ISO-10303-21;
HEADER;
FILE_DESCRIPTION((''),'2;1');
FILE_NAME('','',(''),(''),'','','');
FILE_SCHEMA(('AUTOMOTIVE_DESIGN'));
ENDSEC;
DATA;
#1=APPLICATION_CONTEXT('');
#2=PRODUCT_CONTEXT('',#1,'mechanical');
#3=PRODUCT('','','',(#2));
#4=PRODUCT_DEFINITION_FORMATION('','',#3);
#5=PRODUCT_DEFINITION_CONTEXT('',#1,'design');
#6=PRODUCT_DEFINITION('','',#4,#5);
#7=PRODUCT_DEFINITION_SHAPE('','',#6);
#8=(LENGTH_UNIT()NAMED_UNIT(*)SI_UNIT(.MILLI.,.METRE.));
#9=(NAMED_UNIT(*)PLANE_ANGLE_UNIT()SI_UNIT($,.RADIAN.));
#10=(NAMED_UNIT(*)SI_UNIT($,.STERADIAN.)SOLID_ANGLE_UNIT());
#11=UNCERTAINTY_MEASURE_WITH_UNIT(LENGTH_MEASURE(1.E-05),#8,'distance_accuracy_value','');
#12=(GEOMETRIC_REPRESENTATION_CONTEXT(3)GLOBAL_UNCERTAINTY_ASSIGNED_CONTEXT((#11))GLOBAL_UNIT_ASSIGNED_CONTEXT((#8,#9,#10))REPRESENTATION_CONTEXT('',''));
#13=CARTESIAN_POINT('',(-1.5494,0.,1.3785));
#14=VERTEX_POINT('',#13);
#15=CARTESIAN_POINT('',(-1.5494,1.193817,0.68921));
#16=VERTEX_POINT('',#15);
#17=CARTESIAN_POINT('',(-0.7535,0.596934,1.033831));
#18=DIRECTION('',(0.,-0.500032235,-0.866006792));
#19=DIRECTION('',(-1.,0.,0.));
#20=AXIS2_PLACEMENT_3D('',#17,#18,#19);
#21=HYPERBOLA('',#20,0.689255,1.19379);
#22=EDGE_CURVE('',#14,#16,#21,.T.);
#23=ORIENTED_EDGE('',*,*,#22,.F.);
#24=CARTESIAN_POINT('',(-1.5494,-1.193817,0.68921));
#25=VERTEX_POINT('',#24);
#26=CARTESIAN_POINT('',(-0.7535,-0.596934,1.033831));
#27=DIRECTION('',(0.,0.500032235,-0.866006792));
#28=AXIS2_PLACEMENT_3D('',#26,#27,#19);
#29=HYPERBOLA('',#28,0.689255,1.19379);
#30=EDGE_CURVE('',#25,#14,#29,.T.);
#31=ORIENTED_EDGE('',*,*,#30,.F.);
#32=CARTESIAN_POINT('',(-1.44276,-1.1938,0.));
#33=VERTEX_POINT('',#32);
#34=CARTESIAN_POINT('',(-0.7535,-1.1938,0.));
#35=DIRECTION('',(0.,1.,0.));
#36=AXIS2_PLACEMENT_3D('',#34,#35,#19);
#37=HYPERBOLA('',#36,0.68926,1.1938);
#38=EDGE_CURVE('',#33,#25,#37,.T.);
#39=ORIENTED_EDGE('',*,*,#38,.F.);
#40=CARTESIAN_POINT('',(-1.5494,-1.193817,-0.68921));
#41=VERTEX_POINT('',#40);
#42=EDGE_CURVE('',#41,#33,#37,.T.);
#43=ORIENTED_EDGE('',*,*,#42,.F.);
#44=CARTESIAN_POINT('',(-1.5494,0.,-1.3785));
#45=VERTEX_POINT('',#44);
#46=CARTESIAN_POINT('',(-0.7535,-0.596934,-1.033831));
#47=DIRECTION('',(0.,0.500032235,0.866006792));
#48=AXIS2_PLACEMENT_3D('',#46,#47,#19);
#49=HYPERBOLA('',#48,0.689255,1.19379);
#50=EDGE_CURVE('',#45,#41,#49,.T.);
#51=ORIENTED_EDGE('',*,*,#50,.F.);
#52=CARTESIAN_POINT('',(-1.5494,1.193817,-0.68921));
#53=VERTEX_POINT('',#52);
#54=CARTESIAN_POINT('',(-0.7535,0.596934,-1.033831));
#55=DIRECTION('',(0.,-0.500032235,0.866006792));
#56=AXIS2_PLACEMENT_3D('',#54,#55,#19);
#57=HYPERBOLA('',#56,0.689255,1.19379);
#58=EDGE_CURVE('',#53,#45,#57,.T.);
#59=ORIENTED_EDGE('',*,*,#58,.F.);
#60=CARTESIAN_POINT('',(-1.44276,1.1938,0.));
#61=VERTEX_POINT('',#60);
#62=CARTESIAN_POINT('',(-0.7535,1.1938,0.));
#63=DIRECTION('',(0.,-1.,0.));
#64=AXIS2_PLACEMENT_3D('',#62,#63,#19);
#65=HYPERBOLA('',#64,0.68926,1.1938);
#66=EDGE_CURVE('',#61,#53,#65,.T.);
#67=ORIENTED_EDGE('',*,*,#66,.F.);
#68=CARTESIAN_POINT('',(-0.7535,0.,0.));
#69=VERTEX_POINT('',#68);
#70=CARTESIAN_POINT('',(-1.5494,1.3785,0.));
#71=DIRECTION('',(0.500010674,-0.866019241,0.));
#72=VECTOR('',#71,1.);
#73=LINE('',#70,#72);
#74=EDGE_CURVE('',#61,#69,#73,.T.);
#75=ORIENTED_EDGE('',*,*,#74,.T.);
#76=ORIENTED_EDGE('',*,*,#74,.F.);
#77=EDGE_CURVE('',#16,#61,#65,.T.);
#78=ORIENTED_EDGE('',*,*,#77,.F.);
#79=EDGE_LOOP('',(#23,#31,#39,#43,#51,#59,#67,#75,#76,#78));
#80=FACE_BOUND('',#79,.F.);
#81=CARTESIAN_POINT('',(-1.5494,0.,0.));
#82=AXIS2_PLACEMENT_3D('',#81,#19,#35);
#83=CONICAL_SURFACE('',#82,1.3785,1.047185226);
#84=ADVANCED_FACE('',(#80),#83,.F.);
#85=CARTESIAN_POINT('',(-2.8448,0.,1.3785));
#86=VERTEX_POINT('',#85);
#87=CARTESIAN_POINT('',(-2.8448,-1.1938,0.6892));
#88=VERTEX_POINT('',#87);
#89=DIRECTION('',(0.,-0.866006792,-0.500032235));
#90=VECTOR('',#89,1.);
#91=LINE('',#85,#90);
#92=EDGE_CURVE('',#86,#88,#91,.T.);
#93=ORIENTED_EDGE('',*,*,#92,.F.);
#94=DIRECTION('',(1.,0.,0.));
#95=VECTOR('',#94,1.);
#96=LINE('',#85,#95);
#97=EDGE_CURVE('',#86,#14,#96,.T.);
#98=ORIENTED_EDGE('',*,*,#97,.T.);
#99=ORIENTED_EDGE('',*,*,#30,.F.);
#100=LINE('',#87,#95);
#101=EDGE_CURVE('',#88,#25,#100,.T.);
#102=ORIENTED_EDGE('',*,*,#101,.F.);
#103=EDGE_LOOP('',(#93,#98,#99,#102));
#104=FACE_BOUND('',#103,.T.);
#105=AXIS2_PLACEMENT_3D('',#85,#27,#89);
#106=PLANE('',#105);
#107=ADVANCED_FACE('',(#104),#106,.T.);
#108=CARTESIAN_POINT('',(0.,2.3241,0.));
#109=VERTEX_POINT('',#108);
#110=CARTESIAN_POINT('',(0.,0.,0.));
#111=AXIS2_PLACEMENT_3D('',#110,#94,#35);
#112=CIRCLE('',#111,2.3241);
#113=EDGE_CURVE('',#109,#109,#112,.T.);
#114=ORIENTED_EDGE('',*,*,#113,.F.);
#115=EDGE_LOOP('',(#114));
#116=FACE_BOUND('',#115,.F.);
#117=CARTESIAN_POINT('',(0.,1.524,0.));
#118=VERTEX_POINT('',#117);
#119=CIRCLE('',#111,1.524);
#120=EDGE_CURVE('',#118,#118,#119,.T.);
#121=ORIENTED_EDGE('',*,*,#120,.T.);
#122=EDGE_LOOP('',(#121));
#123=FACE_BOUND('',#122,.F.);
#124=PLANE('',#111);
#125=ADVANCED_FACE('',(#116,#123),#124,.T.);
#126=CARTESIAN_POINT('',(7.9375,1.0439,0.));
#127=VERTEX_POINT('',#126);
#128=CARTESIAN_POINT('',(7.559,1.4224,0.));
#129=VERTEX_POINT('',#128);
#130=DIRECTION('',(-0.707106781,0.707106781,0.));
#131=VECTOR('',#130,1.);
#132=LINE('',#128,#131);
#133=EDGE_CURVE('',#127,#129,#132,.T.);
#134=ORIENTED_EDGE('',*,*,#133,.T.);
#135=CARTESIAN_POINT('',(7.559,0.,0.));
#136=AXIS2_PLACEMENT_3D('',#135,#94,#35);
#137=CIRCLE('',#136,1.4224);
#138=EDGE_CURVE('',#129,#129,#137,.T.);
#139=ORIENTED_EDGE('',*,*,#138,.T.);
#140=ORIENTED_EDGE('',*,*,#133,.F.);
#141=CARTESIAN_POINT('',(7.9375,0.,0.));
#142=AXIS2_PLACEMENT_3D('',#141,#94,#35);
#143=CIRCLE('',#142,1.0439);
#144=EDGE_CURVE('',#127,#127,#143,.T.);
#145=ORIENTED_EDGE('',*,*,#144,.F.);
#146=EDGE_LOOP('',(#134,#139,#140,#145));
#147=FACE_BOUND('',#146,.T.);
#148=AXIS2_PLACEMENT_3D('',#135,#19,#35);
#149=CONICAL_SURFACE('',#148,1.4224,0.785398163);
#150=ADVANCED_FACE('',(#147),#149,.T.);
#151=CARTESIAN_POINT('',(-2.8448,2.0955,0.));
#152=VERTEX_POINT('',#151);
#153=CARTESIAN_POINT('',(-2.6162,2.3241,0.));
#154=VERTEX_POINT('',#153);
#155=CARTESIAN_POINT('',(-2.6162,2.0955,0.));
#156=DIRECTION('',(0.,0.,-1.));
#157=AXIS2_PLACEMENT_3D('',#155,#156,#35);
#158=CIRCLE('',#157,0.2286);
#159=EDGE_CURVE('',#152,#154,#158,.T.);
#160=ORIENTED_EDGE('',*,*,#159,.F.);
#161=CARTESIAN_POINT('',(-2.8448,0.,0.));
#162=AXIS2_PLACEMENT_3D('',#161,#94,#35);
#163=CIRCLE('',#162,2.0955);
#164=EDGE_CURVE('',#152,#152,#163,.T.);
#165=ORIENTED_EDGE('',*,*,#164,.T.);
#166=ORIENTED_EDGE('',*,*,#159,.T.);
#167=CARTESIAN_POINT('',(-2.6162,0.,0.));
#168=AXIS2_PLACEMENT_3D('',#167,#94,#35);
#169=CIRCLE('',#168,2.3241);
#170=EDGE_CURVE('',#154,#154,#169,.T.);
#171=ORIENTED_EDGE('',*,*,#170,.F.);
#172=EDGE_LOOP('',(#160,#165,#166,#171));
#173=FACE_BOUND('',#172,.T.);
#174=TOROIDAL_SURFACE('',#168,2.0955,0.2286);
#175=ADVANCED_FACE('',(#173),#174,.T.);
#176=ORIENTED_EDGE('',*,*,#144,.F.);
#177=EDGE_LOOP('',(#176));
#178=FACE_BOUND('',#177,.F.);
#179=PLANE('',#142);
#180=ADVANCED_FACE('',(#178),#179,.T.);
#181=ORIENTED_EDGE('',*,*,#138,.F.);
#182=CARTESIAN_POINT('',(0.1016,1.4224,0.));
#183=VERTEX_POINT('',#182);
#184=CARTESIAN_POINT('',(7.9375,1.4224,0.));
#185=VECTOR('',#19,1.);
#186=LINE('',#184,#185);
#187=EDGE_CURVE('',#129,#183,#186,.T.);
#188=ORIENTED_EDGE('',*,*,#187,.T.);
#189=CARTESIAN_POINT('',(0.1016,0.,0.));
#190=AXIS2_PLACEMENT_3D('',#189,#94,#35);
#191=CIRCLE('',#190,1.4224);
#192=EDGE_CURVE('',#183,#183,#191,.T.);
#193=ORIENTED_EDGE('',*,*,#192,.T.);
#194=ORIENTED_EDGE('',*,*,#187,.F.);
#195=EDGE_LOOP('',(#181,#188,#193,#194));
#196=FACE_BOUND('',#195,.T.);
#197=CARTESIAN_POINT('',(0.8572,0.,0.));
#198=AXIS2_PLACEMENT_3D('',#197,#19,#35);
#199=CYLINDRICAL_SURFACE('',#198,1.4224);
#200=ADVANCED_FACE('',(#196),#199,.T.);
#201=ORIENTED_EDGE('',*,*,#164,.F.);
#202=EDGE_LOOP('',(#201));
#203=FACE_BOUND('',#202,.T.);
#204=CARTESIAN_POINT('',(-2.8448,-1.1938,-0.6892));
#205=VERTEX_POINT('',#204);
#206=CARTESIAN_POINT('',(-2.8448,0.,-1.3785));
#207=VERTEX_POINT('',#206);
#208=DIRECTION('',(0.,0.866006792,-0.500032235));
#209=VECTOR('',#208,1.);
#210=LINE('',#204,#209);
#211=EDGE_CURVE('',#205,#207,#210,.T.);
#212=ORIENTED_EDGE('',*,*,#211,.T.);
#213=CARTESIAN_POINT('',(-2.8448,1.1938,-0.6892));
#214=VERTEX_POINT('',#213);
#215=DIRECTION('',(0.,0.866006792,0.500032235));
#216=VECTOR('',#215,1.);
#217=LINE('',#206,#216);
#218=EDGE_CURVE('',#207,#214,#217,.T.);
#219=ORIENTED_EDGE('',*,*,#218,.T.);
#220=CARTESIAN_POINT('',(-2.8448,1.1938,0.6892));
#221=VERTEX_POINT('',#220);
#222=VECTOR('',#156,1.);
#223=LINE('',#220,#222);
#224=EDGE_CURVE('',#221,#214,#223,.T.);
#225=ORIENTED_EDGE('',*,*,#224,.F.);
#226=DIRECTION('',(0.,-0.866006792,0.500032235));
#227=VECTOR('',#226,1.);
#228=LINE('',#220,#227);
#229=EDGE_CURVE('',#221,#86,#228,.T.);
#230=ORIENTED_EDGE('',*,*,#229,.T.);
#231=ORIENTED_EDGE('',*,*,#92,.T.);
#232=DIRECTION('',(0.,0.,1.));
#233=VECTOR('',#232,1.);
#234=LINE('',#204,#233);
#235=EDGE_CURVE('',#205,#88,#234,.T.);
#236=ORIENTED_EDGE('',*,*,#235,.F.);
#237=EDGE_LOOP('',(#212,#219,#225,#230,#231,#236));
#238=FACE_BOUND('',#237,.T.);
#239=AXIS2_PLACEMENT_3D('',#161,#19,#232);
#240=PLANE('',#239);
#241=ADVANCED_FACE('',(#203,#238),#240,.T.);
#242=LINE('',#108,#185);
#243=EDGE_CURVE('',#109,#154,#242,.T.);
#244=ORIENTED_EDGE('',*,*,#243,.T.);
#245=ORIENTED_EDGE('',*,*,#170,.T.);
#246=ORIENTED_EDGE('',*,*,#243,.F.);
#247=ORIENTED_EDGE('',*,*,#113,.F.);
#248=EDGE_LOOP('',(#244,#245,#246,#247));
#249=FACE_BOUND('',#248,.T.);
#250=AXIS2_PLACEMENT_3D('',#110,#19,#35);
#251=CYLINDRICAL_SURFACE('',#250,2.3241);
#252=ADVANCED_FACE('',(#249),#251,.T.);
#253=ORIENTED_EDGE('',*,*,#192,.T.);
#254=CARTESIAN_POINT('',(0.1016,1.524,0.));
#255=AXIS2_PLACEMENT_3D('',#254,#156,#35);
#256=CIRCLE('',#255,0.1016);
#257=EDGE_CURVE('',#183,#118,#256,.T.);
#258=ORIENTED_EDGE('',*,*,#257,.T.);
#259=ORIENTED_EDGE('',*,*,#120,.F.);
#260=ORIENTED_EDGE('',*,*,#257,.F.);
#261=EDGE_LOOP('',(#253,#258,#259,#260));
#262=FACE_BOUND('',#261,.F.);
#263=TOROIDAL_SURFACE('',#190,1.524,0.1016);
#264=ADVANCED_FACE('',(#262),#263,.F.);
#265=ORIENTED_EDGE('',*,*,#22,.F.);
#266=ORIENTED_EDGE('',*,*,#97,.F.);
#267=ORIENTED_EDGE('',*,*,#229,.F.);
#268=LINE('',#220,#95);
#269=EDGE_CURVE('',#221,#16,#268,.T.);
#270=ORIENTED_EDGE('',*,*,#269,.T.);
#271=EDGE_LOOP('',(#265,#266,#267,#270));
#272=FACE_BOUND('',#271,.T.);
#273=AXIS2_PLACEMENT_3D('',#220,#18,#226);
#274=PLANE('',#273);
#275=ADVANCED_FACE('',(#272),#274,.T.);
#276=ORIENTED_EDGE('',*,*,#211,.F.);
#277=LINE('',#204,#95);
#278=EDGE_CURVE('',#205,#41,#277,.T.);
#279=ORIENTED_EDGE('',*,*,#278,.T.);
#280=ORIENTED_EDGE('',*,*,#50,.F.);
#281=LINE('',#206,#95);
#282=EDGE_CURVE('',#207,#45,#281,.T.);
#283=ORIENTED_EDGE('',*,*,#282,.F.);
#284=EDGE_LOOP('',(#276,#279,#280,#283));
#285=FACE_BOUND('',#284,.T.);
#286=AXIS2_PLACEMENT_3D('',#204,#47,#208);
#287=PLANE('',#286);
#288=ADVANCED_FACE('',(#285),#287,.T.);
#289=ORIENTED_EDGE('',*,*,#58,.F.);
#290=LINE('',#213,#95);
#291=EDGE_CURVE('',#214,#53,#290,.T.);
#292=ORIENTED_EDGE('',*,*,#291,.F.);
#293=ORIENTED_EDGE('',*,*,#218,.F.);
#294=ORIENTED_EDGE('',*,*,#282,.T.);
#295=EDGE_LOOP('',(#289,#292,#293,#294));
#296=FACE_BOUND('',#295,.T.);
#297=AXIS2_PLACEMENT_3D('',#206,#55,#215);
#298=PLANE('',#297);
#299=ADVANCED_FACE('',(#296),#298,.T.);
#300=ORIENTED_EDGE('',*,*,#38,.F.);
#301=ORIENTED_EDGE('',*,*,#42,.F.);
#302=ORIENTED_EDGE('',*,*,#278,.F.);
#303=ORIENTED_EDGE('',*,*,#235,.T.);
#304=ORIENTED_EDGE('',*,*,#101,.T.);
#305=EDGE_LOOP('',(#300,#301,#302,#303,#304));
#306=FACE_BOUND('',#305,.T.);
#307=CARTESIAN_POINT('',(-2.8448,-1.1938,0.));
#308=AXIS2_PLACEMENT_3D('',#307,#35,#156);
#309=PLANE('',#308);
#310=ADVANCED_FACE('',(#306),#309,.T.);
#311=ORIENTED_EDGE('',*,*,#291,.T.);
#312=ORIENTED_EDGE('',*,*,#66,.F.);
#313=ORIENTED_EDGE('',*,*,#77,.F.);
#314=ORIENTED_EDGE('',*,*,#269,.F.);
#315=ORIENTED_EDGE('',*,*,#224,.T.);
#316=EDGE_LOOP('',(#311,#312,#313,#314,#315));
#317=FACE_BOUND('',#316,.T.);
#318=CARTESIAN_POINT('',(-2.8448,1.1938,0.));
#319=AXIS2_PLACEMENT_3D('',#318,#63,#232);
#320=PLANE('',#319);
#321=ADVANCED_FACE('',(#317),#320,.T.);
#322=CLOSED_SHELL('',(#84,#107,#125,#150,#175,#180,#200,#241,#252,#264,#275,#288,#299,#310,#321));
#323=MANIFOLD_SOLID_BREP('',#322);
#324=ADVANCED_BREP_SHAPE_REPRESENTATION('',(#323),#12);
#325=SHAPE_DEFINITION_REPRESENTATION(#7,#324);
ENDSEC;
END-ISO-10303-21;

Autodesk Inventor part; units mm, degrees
ref_plane "YZ Plane" through (0, 0, 0) normal (1, 0, 0) x (0, 1, 0)
ref_plane "XZ Plane" through (0, 0, 0) normal (0, 1, 0) x (-1, 0, 0)
sketch "Sketch1" plane through (0, 0, 0) normal (0, 0, 1) x (1, 0, 0)
  line L0 (-0.7535, 0) -> (7.9375, 0)
  line L1 (7.9375, 0) -> (7.9375, 1.4224)
  line L2 (7.9375, 1.4224) -> (2.4448, 1.4224)
  line L3 (2.4448, 1.4224) -> (0.8572, 1.4224)
  line L4 (0.8572, 1.4224) -> (0, 1.4224)
  line L5 (0, 1.4224) -> (0, 2.3241)
  line L6 (0, 2.3241) -> (-2.8448, 2.3241)
  line L7 (-2.8448, 2.3241) -> (-2.8448, 1.3785)
  line L8 (-2.8448, 1.3785) -> (-1.5494, 1.3785)
  line L9 (-1.5494, 1.3785) -> (-0.7535, 0)
  line L10 (-5.0013, 0) -> (10.094, 0) projected
  line L11 (0, -0.4648) -> (0, 2.7889) projected
  line L12 (2.4448, 1.4224) -> (0, 1.4224) construction
  dimension "d1" = 5.4928
  dimension "d2" = 1.5876
  dimension "d3" = 2.8448
  dimension "d4" = 1.2954
  dimension "d5" = 60
  dimension "d6" = 2.8448
  dimension "d7" = 2.8448
  dimension "d8" = 2.757
  dimension "d9" = 4.6482
  dimension "d26" = 7.9375
revolve "Body" add sketch "Sketch1" angle 360 about axis through (-0.7535, 0, 0) along (1, 0, 0)
sketch "Sketch2" plane through (-2.8448, 0, 0) normal (-1, 0, 0) x (0, 0, 1)
  circle A0 centre (0, 0) radius 1.3785 projected
  line L0 (0, -3.2537) -> (0, 3.2537) projected
  line L1 (-3.2537, 0) -> (3.2537, 0) projected
  line L2 (1.3785, 0) -> (0.6892, -1.1938)
  line L3 (0.6892, -1.1938) -> (-0.6892, -1.1938)
  line L4 (-0.6892, -1.1938) -> (-1.3785, 0)
  line L5 (-1.3785, 0) -> (-0.6892, 1.1938)
  line L6 (-0.6892, 1.1938) -> (0.6892, 1.1938)
  line L7 (0.6892, 1.1938) -> (1.3785, 0)
  point P0 (0, 0)
extrude "Slot" add sketch "Sketch2" against normal up to next contours L7 A0 | A0 L2 | L6 L0 A0 | A0 L0 L3 | L0 L6 A0 | A0 L3 L0 | L4 A0 | A0 L5
fillet "Fillet1" radius 0.2286 1 edges at (-2.8448, -2.3241, 0)
thread "Thread" size "4-40 UNC" class "2A" standard "ANSI Unified Screw Threads" length 5.4927
chamfer "Chamfer1" distance 0.3785 distance2 0.3785 1 edges at (7.9375, -1.4224, 0) measured on face at (7.9375, -0.3549, 0.3144)
ref_plane "Work Plane1" through (29, 0, 0) normal (0, -1, 0) x (1, 0, 0)
fillet "Fillet2" radius 0.1016 1 edges at (0, -1.4224, 0)
equation "\"d1\" = GEL"
equation "\"d3\" = KOH"
equation "\"d4\" = INTI"
equation "\"d6\" = GD"
equation "\"d7\" = BDM"
equation "\"d8\" = 1.1547 * SW"
equation "\"d9\" = KOD"
equation "\"d26\" = NLG"
equation "\"d30\" = R"
equation "\"d17\" = RR"
equation "\"d13\" = GEL"
equation "\"d15\" = -0.5 * SPD + 0.5 * GD"
equation "\"d16\" = GUL"
equation "\"GD\" = 2.8448"
equation "\"NLG\" = 7.9375"
equation "\"GEL\" = 5.49275"
equation "\"KOD\" = 4.6482"
equation "\"KOH\" = 2.8448"
equation "\"INTI\" = 1.2954"
equation "\"GAL\" = 1.5875"
equation "\"GUL\" = 0.37846"
equation "\"BDM\" = 2.8448"
equation "\"SW\" = 2.3876"
equation "\"RR\" = 0.2286"
equation "\"SPD\" = 2.08788"
equation "\"R\" = 0.1016"
equation "\"PHH\" = 0.127"
equation "\"GD1\" = SPD"
equation "\"THREADDIA\" = 2.8448"
equation "\"FAWI\" = 45deg"
equation "\"KOH1\" = 2.5654"
equation "\"NND\" = 2.8448"
equation "\"TOA\" = 30deg"
equation "\"E0\" = 1.155 * SW"
properties part number "ANSI B18.3 - No. 4 - 40 UNC - 5/16 HS HCS" material "Steel, Mild"
